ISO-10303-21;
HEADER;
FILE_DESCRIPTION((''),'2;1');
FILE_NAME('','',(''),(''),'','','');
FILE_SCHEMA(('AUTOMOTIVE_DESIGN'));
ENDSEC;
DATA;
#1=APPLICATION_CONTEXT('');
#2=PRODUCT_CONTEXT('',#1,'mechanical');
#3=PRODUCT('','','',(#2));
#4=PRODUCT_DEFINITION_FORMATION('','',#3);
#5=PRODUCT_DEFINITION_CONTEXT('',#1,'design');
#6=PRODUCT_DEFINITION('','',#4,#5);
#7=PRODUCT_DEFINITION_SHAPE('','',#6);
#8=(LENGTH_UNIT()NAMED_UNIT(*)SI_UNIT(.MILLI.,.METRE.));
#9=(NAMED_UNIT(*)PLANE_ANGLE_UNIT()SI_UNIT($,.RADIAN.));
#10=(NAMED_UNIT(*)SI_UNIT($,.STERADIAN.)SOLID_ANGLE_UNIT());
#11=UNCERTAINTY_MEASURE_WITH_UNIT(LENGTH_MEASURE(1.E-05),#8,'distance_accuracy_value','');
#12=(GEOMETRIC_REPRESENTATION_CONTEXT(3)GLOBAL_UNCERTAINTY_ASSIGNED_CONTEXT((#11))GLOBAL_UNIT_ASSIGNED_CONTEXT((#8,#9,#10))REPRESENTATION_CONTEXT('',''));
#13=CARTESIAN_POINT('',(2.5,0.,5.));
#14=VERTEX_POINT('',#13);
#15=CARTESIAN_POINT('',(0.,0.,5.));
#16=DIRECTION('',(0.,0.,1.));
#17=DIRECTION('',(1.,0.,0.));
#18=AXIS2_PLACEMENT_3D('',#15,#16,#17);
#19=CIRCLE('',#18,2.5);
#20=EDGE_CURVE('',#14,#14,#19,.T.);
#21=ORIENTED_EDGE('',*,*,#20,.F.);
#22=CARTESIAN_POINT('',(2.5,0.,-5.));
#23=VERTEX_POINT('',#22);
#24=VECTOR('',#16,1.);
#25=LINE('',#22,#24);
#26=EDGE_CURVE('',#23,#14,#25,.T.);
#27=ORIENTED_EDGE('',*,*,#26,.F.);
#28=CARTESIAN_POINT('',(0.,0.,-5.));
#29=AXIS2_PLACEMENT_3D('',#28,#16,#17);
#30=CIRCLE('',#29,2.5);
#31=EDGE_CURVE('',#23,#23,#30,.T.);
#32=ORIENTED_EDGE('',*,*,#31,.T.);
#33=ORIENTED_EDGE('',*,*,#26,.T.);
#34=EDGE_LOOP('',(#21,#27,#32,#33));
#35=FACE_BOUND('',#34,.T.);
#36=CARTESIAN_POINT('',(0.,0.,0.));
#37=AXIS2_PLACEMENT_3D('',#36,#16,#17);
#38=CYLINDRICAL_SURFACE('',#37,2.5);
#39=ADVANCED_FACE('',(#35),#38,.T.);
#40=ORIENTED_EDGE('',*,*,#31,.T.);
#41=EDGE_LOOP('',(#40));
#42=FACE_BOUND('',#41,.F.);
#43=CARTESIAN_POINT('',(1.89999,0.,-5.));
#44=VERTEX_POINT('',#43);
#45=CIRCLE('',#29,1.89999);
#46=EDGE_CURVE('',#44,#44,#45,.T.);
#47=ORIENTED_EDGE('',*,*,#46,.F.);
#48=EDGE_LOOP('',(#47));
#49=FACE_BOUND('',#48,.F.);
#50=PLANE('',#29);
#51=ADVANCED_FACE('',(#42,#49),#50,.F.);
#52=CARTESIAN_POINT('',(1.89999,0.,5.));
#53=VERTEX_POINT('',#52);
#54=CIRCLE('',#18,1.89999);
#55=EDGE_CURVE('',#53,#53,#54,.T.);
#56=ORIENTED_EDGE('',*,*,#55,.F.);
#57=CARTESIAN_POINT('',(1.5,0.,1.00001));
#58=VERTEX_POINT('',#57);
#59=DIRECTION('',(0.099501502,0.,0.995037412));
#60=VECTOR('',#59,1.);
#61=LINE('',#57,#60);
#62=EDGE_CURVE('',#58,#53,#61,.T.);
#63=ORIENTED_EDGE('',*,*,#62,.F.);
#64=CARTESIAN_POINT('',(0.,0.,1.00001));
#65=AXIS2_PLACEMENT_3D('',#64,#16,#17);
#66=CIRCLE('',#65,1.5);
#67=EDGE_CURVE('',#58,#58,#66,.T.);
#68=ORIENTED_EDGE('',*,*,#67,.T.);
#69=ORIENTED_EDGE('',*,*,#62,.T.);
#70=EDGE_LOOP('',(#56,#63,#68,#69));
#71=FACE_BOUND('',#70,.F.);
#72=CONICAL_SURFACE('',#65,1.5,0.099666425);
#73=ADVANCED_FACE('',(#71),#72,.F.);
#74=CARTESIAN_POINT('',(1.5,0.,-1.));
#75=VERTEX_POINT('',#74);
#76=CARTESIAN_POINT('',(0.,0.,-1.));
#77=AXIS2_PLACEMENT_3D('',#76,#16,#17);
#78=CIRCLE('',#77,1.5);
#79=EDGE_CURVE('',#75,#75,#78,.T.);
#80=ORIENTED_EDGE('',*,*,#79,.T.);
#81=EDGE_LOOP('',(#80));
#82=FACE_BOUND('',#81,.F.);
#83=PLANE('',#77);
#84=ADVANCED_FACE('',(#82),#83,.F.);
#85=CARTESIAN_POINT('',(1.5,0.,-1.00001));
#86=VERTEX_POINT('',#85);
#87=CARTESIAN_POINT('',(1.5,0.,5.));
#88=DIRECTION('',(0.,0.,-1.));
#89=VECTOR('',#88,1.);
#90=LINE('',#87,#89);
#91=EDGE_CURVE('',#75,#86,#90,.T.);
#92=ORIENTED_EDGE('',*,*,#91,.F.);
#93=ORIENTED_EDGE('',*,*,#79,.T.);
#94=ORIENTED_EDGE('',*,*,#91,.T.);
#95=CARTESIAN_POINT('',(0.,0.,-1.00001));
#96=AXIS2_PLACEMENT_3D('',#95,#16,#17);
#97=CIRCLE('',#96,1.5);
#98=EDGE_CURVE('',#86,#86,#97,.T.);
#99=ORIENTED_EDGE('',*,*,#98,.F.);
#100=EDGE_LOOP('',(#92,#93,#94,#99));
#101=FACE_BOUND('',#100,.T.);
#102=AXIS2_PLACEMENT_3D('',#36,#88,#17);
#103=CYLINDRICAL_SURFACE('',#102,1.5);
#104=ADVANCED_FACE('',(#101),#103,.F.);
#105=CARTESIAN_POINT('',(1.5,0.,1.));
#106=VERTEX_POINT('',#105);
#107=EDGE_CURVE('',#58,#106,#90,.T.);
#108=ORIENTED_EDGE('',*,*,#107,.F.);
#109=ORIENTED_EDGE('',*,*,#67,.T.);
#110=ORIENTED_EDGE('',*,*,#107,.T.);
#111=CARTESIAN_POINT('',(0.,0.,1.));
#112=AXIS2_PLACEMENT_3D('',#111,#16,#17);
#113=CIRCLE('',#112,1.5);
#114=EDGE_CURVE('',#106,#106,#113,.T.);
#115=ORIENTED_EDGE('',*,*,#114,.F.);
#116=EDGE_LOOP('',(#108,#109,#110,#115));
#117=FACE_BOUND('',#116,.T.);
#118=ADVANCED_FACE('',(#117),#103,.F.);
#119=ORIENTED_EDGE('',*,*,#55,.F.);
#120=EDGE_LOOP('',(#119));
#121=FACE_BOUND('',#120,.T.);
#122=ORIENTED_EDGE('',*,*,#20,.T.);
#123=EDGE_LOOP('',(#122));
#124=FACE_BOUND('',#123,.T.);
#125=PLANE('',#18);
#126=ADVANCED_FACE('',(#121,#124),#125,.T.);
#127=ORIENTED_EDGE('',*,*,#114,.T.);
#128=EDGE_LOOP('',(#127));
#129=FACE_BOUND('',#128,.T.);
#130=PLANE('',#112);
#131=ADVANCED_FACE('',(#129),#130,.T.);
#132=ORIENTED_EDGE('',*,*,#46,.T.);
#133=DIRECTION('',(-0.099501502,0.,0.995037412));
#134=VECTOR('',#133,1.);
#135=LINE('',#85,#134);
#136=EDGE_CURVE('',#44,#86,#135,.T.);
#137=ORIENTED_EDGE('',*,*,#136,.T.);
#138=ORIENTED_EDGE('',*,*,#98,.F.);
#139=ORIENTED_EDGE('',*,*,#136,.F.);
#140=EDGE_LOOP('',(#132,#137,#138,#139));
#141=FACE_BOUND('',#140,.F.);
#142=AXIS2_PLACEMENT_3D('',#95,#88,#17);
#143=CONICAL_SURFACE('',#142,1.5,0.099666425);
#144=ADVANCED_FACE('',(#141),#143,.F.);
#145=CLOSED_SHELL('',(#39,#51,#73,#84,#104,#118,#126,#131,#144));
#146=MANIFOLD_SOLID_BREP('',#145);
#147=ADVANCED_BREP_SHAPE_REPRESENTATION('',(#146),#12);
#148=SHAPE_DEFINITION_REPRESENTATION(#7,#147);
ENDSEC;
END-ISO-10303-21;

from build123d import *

# Parameters (mm, degrees)
F0_R     = 1.5
F1_DEPTH = 1
F0_R_2   = 2.5
F2_DEPTH = 5
F3_SIZE2 = 0.39999
F3_SIZE  = 3.99999
F4_SIZE2 = 3.99999
F4_SIZE  = 0.39999


# Not quite as in the source:
# - a fillet or chamfer is up to 0.001 mm smaller than in the source, because OpenCascade refuses the exact size


with BuildPart() as f1:
    # F0 (on Top) → F1 (new body, symmetric)
    with BuildSketch(Plane.XY):
        Circle(F0_R)
    extrude(amount=F1_DEPTH, both=True)

    # F0 (on Top) → F2 (join, symmetric)
    with BuildSketch(Plane.XY):
        Circle(F0_R_2)
        Circle(F0_R, mode=Mode.SUBTRACT)
    extrude(amount=F2_DEPTH, both=True)

    # F3 (size 4 and 0.4 in the source; OpenCascade refuses exactly that, so slightly less here)
    f3_edges = [f1.edges().sort_by_distance(p)[0] for p in [
        (-1.5, 0, 5),
    ]]
    f3_side = f1.faces().sort_by_distance((-1.5, 0, 3))[0]
    chamfer(f3_edges, length=F3_SIZE, length2=F3_SIZE2, reference=f3_side)

    # F4 (size 0.4 and 4 in the source; OpenCascade refuses exactly that, so slightly less here)
    f4_edges = [f1.edges().sort_by_distance(p)[0] for p in [
        (-1.5, 0, -5),
    ]]
    f4_side = f1.faces().sort_by_distance((-2.429289, 0, -5))[0]
    chamfer(f4_edges, length=F4_SIZE, length2=F4_SIZE2, reference=f4_side)


solid = f1.part
